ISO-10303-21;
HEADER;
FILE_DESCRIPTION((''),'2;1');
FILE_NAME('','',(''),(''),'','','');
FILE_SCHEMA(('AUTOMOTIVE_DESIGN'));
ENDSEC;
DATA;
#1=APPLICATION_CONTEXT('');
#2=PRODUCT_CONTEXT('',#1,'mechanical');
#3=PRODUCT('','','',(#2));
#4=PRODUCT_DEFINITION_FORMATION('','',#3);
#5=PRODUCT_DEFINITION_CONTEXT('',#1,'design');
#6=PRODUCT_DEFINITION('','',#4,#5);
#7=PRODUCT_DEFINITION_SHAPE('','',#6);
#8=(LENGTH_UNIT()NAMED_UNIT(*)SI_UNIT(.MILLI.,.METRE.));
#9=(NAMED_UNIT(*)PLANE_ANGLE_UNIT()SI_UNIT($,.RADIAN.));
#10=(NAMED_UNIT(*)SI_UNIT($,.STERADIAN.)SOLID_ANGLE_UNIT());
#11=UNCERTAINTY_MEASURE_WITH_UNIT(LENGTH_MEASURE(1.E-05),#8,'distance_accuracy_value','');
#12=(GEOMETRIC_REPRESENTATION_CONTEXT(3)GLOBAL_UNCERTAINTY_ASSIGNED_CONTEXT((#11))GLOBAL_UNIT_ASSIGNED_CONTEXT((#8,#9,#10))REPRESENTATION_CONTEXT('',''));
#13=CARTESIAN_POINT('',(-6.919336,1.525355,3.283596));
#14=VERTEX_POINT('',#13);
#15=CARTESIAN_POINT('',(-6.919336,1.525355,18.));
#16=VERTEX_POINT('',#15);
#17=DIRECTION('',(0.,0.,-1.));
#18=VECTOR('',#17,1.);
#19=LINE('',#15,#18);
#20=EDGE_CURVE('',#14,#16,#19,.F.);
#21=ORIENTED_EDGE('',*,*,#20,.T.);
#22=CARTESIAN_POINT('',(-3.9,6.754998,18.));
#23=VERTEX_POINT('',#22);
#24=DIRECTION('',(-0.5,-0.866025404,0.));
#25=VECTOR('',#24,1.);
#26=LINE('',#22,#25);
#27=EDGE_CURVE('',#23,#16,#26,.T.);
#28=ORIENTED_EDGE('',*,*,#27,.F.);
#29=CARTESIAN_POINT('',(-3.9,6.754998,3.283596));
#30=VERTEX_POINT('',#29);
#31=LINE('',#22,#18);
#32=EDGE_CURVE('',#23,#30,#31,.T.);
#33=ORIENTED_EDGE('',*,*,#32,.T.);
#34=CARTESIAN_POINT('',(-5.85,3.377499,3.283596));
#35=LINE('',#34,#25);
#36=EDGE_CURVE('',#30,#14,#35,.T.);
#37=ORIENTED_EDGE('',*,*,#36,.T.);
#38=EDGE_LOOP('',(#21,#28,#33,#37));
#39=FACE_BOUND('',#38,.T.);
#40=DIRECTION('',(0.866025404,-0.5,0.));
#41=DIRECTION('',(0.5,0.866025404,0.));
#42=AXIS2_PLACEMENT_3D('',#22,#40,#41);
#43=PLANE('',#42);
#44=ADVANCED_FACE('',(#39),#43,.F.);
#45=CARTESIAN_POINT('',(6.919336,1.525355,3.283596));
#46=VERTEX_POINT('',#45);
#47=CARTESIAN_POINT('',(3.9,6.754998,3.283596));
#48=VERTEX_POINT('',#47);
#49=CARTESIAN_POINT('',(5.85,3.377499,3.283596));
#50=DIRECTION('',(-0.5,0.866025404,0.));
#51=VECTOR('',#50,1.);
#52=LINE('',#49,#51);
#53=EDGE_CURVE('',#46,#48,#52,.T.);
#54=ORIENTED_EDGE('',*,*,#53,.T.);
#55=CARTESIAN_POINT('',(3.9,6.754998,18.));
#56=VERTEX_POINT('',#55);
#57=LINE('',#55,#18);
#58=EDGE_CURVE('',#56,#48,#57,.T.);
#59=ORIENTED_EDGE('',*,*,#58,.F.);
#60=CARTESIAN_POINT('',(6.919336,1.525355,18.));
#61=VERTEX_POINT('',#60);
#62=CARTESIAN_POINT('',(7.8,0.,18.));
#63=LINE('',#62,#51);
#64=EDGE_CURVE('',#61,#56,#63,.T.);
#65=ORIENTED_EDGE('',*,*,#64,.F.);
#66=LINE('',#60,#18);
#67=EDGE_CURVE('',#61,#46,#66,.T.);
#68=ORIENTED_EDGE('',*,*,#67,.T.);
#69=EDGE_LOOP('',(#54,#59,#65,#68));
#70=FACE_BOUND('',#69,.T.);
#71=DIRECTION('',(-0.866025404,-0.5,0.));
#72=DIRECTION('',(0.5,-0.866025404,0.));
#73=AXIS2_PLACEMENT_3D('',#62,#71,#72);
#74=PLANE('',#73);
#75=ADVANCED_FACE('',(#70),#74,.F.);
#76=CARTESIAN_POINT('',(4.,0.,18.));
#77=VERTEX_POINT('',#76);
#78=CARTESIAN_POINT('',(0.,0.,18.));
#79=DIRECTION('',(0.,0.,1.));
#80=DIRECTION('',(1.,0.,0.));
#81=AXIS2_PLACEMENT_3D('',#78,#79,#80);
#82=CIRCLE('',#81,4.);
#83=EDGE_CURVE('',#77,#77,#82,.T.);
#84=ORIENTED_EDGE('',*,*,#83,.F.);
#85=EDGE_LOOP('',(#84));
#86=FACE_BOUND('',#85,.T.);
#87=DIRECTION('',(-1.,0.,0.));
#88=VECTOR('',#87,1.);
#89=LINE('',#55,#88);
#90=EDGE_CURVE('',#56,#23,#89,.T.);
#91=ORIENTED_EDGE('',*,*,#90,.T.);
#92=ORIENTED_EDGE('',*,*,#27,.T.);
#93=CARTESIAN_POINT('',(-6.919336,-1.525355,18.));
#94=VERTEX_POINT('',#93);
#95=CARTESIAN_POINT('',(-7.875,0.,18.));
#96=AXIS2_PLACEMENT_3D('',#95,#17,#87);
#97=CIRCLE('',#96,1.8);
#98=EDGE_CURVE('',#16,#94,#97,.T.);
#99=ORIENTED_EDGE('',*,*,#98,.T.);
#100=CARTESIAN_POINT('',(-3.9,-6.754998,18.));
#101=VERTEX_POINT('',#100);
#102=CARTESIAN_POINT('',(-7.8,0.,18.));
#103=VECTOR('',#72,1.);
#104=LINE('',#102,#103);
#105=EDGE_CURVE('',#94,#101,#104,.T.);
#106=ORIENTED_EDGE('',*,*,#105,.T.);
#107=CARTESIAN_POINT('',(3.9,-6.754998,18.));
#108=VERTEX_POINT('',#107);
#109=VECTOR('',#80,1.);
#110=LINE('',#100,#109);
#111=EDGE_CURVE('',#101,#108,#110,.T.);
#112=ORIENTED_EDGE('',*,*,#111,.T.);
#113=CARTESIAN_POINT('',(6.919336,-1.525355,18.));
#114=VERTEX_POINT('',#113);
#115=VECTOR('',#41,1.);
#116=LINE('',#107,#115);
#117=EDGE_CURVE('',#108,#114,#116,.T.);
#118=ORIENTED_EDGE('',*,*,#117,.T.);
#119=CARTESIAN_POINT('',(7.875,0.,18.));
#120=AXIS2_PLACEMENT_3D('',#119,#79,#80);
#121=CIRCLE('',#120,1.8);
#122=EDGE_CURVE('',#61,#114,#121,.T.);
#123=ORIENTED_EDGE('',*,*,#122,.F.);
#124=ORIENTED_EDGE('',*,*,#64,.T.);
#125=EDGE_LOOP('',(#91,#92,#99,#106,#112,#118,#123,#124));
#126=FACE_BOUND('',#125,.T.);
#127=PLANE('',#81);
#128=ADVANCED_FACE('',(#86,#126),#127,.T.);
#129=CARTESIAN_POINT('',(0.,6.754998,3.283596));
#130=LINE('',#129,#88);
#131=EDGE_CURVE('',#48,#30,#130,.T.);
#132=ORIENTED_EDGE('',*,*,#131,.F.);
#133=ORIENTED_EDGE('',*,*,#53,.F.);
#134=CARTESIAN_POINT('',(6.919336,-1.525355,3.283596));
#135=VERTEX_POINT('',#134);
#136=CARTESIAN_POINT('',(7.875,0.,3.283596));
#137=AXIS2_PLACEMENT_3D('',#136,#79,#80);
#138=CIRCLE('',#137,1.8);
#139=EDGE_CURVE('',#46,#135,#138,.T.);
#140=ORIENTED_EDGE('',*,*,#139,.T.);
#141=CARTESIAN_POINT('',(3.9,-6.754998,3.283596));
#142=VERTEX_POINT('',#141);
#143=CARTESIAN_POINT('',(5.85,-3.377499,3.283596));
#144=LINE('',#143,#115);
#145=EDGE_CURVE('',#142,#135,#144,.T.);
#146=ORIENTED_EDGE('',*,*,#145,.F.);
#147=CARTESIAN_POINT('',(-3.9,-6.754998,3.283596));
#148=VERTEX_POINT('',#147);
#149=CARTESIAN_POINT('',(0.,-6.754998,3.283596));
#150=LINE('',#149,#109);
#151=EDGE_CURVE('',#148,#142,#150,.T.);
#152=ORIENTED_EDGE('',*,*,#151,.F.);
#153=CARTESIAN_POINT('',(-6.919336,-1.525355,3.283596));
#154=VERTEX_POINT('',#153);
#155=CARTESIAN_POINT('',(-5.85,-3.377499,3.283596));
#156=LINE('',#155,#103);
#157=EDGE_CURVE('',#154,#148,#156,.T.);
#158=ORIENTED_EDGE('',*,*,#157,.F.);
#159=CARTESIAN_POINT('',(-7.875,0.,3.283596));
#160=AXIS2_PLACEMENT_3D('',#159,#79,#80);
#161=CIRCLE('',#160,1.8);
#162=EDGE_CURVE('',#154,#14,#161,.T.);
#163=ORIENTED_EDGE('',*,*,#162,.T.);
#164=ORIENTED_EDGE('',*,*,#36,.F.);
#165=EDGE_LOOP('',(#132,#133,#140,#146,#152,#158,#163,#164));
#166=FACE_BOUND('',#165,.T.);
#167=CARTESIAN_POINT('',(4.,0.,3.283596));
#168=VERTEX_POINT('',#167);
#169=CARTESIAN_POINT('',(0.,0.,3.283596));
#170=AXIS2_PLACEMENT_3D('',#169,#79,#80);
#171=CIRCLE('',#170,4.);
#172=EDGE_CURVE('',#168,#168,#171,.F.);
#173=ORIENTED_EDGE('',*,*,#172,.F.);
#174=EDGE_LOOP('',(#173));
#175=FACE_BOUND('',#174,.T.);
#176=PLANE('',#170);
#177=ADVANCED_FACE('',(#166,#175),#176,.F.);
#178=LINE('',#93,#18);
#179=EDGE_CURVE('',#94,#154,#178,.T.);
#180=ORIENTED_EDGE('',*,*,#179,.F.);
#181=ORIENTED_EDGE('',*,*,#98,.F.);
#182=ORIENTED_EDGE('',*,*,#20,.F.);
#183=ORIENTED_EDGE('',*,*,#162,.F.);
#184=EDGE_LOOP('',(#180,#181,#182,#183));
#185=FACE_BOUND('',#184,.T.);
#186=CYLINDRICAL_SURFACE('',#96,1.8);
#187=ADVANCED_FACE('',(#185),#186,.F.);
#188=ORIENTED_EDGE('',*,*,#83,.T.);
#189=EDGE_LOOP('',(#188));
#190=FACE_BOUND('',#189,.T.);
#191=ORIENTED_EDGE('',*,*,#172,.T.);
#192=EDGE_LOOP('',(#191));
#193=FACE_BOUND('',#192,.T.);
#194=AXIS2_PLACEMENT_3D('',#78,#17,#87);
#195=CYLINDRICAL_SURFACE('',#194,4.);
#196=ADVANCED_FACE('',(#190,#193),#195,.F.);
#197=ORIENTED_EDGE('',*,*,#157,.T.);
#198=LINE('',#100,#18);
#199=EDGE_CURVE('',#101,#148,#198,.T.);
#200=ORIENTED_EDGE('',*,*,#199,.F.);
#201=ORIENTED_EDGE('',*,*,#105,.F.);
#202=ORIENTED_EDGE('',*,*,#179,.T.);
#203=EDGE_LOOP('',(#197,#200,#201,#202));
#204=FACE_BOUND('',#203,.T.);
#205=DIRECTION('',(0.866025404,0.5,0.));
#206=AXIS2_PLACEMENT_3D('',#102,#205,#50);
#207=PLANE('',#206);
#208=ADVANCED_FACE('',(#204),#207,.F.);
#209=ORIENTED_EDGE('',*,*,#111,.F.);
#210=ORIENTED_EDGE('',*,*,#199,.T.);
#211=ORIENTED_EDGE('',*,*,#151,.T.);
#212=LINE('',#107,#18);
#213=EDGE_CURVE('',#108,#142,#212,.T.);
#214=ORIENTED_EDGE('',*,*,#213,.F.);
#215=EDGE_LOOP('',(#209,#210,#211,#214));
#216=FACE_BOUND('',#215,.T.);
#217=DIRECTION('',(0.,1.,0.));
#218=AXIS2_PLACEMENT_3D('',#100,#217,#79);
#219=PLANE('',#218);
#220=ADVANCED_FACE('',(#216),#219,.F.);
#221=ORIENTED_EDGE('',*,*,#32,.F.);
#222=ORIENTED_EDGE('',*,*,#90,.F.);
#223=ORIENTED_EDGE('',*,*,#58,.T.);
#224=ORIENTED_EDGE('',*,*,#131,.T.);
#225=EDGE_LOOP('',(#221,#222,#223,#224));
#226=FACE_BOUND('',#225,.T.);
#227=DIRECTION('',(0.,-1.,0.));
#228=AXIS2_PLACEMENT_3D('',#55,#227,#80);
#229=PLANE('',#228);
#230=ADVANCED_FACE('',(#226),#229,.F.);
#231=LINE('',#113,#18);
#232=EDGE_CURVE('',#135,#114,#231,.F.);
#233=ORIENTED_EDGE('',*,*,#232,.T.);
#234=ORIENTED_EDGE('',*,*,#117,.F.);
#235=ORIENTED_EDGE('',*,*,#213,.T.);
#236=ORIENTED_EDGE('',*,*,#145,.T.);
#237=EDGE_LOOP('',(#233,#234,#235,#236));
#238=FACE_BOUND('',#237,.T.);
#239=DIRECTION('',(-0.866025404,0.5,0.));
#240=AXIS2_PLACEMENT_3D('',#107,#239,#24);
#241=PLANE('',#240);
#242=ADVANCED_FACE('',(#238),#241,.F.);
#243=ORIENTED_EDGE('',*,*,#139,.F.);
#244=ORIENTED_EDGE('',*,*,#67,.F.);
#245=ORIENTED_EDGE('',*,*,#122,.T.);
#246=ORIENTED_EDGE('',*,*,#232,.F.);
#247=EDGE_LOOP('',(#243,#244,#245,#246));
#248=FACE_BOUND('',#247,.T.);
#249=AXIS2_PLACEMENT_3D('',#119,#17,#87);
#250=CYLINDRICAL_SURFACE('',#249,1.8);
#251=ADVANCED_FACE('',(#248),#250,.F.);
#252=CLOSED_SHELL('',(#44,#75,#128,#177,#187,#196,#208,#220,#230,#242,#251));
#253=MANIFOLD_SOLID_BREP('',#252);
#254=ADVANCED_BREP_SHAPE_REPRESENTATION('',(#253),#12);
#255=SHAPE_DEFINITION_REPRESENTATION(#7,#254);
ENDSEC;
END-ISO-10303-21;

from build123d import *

# Parameters (mm, degrees)
SKETCH1_R               = 17
BOSS_EXTRUDE1_DEPTH     = 4.4
CAVITY1_OUTLINE_R       = 3.15
CAVITY1_DEPTH           = 3.283595969
CAVITY1_START           = 1.183595969
CAVITY1_2_OUTLINE_R     = 3.15
CAVITY1_2_OUTLINE_R_2   = 1.575
CAVITY1_2_DEPTH         = 2.1
SKETCH9_R               = 12.8
BOSS_EXTRUDE3_DEPTH     = 5.6
BOSS_EXTRUDE8_DEPTH     = 8
SKETCH2_R               = 0.6
CUT_EXTRUDE1_DEPTH      = 31.033314835
CIRPATTERN1_COUNT       = 6
CUT_EXTRUDE2_START      = -3.283596
SKETCH3_R               = 4.596048158
CUT_EXTRUDE2_DEPTH      = 3.283596
CUT_EXTRUDE3_DEPTH      = 31.033314835
CUT_EXTRUDE3_DEPTH_BACK = 4
SKETCH4_R               = 4
SKETCH6_R               = 1.8
CUT_EXTRUDE4_DEPTH      = 31.033314835
SKETCH12_4_OUTSIDE_W    = 46.268
SKETCH12_4_OUTSIDE_H    = 46.268
CUT_EXTRUDE5_DEPTH      = 27.038433133


# Read off the part's stored shape, not the designer's step: Cavity1
with BuildPart() as part:
    # Sketch1 → Boss-Extrude1 (new body)
    with BuildSketch(Plane.XY):
        Circle(SKETCH1_R)
    extrude(amount=BOSS_EXTRUDE1_DEPTH)

    # Cavity1 outline → Cavity1 (cut)
    with BuildSketch(Plane.XY):
        with BuildLine():
            Line((3.9375, 6.819950055), (2.048148228, 15.163776711))
            ThreePointArc((2.048148228, 15.163776711), (0, 16.8), (-2.048148228, 15.163776711))
            Line((-2.048148228, 15.163776711), (-3.9375, 6.819950055))
            Line((-3.9375, 6.819950055), (-12.108141735, 9.355636751))
            ThreePointArc((-12.108141735, 9.355636751), (-14.549226784, 8.4), (-14.156289963, 5.80813996))
            Line((-14.156289963, 5.80813996), (-7.875, 0))
            Line((-7.875, 0), (-14.156289963, -5.80813996))
            ThreePointArc((-14.156289963, -5.80813996), (-14.549226784, -8.4), (-12.108141735, -9.355636751))
            Line((-12.108141735, -9.355636751), (-3.9375, -6.819950055))
            Line((-3.9375, -6.819950055), (-2.048148228, -15.163776711))
            ThreePointArc((-2.048148228, -15.163776711), (0, -16.8), (2.048148228, -15.163776711))
            Line((2.048148228, -15.163776711), (3.9375, -6.819950055))
            Line((3.9375, -6.819950055), (12.108141735, -9.355636751))
            ThreePointArc((12.108141735, -9.355636751), (14.549226784, -8.4), (14.156289963, -5.80813996))
            Line((14.156289963, -5.80813996), (7.875, 0))
            Line((7.875, 0), (14.156289963, 5.80813996))
            ThreePointArc((14.156289963, 5.80813996), (14.549226784, 8.4), (12.108141735, 9.355636751))
            Line((12.108141735, 9.355636751), (3.9375, 6.819950055))
        make_face()
        Circle(CAVITY1_OUTLINE_R, mode=Mode.SUBTRACT)
    extrude(amount=CAVITY1_DEPTH, mode=Mode.SUBTRACT)

    # Cavity1 2 outline → Cavity1 2 (cut)
    with BuildSketch(Plane.XY.offset(CAVITY1_START)):
        Circle(CAVITY1_2_OUTLINE_R)
        Circle(CAVITY1_2_OUTLINE_R_2, mode=Mode.SUBTRACT)
    extrude(amount=CAVITY1_2_DEPTH, mode=Mode.SUBTRACT)

    # Sketch9 → Boss-Extrude3 (add)
    with BuildSketch(Plane.XY.offset(4.4)):
        Circle(SKETCH9_R)
    extrude(amount=BOSS_EXTRUDE3_DEPTH)

    # Sketch12 → Boss-Extrude8 (add)
    with BuildSketch(Plane.XY.offset(10)):
        Polygon((3.9, -6.75499815), (7.8, 0), (3.9, 6.75499815), (-3.9, 6.75499815), (-7.8, 0), (-3.9, -6.75499815), align=None)
    extrude(amount=BOSS_EXTRUDE8_DEPTH)

    # Sketch2 → Cut-Extrude1 (cut, through all)
    with BuildSketch(Plane(origin=(0, 0, 0), x_dir=(-1, 0, 0), z_dir=(0, 0, -1))):
        with Locations(Location((0, 13.5, 0), (0, 0, 180))):
            Circle(SKETCH2_R)
        with Locations(Location((0, 10.5, 0), (0, 0, 180))):
            Circle(SKETCH2_R)
        with Locations(Location((0, 7.5, 0), (0, 0, 180))):
            Circle(SKETCH2_R)
    cut_extrude1 = extrude(amount=-CUT_EXTRUDE1_DEPTH, mode=Mode.SUBTRACT)

    # CirPattern1: Cut-Extrude1 ×6 about axis
    cirpattern1_axis = Axis((0, 0, 0), (0, 0, 1))
    for i in range(1, CIRPATTERN1_COUNT):
        add(cut_extrude1.rotate(cirpattern1_axis, i * 360 / CIRPATTERN1_COUNT), mode=Mode.SUBTRACT)

    # Sketch3 → Cut-Extrude2 (cut)
    with BuildSketch(Plane(origin=(0, 0, 0), x_dir=(-1, 0, 0), z_dir=(0, 0, -1)).offset(CUT_EXTRUDE2_START)):
        Circle(SKETCH3_R)
    extrude(amount=CUT_EXTRUDE2_DEPTH, mode=Mode.SUBTRACT)

    # Sketch4 → Cut-Extrude3 (cut, two sides: drawn at the far end of the back side and taken through both)
    with BuildSketch(Plane.XY.offset(-CUT_EXTRUDE3_DEPTH_BACK)):
        Circle(SKETCH4_R)
    extrude(amount=CUT_EXTRUDE3_DEPTH + CUT_EXTRUDE3_DEPTH_BACK, mode=Mode.SUBTRACT)

    # Sketch6 → Cut-Extrude4 (cut, through all)
    with BuildSketch(Plane(origin=(0, 0, 0), x_dir=(-1, 0, 0), z_dir=(0, 0, -1))):
        with Locations(Location((-7.875, 0, 0), (0, 0, 302.067932294))):
            Circle(SKETCH6_R)
        with Locations(Location((7.875, 0, 0), (0, 0, 42.758730598))):
            Circle(SKETCH6_R)
    extrude(amount=-CUT_EXTRUDE4_DEPTH, mode=Mode.SUBTRACT)

    # Sketch12<4> outside → Cut-Extrude5 (cut, through all)
    with BuildSketch(Plane.XY.offset(10)):
        Rectangle(SKETCH12_4_OUTSIDE_W, SKETCH12_4_OUTSIDE_H)
        Polygon((3.9, -6.75499815), (7.8, 0), (3.9, 6.75499815), (-3.9, 6.75499815), (-7.8, 0), (-3.9, -6.75499815), align=None, mode=Mode.SUBTRACT)
    extrude(amount=-CUT_EXTRUDE5_DEPTH, mode=Mode.SUBTRACT)


solid = part.part
